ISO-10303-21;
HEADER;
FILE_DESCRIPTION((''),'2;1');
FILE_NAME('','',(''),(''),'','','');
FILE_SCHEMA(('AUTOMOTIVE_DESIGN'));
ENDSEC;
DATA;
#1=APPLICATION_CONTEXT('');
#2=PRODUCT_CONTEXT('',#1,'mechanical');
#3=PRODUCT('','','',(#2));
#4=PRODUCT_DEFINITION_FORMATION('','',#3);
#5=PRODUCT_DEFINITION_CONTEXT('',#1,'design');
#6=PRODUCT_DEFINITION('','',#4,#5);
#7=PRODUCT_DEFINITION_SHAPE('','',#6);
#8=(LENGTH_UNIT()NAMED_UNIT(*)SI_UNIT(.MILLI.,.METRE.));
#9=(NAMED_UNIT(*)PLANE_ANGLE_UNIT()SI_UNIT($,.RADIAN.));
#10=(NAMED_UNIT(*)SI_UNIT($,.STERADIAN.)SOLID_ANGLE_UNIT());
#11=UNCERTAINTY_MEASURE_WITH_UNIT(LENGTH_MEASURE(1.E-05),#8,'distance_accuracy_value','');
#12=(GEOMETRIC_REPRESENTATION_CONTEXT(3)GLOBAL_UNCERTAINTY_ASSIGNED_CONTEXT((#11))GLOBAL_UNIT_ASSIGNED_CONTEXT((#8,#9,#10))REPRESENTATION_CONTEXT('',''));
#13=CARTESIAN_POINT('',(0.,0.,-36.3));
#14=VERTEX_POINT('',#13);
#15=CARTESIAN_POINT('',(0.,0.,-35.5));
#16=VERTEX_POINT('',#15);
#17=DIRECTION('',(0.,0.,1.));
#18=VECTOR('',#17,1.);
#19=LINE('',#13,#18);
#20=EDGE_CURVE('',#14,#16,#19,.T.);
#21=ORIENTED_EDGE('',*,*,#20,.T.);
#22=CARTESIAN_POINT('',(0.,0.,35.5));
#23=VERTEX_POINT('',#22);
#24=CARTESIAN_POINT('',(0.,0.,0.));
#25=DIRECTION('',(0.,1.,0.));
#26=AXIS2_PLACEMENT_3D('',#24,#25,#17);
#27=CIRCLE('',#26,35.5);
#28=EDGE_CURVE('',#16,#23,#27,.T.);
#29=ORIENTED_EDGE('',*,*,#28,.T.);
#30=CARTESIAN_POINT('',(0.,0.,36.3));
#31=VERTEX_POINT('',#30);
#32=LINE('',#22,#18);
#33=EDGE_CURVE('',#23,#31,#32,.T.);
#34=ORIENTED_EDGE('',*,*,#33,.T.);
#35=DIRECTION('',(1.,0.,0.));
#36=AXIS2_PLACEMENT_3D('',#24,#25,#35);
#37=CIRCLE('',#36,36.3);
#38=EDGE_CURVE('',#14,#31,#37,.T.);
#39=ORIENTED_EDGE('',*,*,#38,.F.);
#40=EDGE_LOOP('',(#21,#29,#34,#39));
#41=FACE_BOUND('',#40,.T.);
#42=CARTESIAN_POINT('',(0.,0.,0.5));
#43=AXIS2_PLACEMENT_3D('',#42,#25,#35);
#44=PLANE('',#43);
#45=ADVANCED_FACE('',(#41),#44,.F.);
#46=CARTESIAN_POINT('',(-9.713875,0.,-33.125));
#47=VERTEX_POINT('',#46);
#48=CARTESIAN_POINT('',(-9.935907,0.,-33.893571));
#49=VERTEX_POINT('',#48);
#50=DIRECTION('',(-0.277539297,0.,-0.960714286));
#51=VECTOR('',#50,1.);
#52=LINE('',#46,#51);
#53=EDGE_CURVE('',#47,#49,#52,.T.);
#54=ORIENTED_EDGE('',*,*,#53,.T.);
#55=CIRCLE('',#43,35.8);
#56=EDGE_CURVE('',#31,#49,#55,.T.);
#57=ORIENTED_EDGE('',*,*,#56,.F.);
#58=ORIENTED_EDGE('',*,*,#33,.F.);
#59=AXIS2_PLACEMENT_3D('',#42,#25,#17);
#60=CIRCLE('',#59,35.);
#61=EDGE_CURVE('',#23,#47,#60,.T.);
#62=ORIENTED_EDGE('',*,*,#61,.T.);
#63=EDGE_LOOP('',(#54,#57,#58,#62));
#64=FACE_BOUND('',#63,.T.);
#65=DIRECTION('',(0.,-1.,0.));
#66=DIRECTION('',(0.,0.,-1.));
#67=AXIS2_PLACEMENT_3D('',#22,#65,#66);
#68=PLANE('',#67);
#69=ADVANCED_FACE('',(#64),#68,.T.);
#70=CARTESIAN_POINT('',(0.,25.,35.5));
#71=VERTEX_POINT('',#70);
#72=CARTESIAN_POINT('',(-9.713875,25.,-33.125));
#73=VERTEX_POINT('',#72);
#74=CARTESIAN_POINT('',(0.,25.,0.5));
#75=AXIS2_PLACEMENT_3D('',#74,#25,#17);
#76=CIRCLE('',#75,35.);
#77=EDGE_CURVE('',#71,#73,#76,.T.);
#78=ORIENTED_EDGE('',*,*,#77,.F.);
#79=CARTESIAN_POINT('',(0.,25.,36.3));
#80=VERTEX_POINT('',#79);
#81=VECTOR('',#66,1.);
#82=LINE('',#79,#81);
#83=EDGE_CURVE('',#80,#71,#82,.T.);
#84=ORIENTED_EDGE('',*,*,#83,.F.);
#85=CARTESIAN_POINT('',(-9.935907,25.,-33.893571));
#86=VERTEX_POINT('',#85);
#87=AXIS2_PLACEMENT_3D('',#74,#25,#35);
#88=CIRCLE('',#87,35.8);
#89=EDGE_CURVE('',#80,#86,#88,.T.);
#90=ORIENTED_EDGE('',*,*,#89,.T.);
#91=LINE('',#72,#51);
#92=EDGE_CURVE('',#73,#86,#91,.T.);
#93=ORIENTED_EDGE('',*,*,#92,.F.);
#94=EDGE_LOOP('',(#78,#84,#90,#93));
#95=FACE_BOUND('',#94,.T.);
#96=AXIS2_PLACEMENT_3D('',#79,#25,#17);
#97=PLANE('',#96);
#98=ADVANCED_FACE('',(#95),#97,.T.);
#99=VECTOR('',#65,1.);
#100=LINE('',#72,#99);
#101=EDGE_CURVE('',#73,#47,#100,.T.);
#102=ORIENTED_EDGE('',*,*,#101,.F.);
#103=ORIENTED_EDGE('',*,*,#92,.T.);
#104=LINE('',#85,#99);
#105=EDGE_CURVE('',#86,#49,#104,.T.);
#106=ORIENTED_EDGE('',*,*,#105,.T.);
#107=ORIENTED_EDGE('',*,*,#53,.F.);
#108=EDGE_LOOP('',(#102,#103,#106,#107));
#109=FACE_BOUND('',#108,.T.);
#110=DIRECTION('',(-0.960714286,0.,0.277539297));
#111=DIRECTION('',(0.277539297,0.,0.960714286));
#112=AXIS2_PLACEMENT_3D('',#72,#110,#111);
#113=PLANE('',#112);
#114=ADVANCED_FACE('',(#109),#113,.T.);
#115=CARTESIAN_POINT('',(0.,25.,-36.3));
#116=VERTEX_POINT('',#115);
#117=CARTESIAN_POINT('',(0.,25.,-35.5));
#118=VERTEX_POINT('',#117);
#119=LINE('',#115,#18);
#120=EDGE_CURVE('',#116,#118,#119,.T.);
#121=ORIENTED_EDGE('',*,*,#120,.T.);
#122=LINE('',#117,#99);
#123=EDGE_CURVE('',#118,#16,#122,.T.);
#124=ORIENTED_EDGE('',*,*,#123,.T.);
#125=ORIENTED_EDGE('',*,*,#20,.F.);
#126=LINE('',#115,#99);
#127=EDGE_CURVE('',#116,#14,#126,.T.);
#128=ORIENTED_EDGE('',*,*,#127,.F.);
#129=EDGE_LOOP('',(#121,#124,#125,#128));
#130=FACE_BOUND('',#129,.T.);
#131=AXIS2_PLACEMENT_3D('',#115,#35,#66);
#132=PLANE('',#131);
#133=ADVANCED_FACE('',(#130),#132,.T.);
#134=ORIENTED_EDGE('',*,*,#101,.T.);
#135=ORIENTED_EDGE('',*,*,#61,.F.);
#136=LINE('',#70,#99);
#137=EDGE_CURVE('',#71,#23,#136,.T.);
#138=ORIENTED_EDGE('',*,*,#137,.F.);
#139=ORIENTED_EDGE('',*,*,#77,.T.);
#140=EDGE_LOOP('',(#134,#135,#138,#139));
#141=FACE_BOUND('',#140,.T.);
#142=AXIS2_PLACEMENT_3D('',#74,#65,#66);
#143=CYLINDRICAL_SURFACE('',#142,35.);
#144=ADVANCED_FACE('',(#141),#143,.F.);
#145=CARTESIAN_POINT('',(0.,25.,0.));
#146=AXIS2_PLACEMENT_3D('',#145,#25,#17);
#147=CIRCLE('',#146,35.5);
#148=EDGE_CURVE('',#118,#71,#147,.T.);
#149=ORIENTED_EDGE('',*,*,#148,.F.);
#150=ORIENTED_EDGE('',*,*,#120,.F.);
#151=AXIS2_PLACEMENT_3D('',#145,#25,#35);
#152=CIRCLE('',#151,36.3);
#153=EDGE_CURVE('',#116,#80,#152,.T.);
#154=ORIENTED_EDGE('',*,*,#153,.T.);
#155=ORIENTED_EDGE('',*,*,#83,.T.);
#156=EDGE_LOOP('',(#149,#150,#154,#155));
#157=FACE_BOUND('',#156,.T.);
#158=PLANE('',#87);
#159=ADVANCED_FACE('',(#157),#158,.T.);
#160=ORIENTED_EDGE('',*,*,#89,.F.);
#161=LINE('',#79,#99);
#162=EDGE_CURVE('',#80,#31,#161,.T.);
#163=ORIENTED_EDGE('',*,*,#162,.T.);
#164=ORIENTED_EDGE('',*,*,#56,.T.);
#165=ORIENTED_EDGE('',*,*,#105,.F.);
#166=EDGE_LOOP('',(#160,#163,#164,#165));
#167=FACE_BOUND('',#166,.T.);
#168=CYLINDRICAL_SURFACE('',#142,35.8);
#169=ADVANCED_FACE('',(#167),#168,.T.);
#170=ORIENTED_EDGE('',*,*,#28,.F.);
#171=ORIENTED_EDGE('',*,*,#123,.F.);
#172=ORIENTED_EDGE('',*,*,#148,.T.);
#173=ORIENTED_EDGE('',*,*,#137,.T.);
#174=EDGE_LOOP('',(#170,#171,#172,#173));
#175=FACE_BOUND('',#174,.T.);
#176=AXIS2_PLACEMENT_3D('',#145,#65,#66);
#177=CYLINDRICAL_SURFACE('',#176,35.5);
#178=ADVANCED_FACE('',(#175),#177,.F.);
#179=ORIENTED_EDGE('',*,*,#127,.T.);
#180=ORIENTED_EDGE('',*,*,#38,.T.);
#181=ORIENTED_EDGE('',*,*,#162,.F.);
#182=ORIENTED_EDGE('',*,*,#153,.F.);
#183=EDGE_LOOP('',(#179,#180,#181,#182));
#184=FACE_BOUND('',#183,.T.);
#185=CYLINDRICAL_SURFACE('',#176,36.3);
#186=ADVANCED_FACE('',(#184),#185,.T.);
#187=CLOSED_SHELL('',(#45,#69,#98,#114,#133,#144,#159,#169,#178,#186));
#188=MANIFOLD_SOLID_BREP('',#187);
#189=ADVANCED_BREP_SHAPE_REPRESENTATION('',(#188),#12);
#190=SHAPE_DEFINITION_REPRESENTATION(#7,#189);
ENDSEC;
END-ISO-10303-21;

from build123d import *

# Parameters (mm, degrees)
BASE_FLANGE2_DEPTH = 25


# Sheet-metal steps are written as plain solids
with BuildPart() as part:
    # Sketch2 → Base-Flange2 (new body)
    with BuildSketch(Plane(origin=(0, 0, 0), x_dir=(1, 0, 0), z_dir=(0, 1, 0))):
        with BuildLine():
            ThreePointArc((0, 35.5), (-35.5, 0), (0, -35.5))
            ThreePointArc((0, -35.5), (34.654545156, 4.405354218), (-9.713875385, 33.125))
            Line((-9.713875385, 33.125), (-9.935906823, 33.893571429))
            ThreePointArc((-9.935906823, 33.893571429), (35.446649046, 4.5174766), (0, -36.3))
            ThreePointArc((0, -36.3), (-36.3, 0), (0, 36.3))
            Line((0, 36.3), (0, 35.5))
        make_face()
    extrude(amount=BASE_FLANGE2_DEPTH)


solid = part.part
